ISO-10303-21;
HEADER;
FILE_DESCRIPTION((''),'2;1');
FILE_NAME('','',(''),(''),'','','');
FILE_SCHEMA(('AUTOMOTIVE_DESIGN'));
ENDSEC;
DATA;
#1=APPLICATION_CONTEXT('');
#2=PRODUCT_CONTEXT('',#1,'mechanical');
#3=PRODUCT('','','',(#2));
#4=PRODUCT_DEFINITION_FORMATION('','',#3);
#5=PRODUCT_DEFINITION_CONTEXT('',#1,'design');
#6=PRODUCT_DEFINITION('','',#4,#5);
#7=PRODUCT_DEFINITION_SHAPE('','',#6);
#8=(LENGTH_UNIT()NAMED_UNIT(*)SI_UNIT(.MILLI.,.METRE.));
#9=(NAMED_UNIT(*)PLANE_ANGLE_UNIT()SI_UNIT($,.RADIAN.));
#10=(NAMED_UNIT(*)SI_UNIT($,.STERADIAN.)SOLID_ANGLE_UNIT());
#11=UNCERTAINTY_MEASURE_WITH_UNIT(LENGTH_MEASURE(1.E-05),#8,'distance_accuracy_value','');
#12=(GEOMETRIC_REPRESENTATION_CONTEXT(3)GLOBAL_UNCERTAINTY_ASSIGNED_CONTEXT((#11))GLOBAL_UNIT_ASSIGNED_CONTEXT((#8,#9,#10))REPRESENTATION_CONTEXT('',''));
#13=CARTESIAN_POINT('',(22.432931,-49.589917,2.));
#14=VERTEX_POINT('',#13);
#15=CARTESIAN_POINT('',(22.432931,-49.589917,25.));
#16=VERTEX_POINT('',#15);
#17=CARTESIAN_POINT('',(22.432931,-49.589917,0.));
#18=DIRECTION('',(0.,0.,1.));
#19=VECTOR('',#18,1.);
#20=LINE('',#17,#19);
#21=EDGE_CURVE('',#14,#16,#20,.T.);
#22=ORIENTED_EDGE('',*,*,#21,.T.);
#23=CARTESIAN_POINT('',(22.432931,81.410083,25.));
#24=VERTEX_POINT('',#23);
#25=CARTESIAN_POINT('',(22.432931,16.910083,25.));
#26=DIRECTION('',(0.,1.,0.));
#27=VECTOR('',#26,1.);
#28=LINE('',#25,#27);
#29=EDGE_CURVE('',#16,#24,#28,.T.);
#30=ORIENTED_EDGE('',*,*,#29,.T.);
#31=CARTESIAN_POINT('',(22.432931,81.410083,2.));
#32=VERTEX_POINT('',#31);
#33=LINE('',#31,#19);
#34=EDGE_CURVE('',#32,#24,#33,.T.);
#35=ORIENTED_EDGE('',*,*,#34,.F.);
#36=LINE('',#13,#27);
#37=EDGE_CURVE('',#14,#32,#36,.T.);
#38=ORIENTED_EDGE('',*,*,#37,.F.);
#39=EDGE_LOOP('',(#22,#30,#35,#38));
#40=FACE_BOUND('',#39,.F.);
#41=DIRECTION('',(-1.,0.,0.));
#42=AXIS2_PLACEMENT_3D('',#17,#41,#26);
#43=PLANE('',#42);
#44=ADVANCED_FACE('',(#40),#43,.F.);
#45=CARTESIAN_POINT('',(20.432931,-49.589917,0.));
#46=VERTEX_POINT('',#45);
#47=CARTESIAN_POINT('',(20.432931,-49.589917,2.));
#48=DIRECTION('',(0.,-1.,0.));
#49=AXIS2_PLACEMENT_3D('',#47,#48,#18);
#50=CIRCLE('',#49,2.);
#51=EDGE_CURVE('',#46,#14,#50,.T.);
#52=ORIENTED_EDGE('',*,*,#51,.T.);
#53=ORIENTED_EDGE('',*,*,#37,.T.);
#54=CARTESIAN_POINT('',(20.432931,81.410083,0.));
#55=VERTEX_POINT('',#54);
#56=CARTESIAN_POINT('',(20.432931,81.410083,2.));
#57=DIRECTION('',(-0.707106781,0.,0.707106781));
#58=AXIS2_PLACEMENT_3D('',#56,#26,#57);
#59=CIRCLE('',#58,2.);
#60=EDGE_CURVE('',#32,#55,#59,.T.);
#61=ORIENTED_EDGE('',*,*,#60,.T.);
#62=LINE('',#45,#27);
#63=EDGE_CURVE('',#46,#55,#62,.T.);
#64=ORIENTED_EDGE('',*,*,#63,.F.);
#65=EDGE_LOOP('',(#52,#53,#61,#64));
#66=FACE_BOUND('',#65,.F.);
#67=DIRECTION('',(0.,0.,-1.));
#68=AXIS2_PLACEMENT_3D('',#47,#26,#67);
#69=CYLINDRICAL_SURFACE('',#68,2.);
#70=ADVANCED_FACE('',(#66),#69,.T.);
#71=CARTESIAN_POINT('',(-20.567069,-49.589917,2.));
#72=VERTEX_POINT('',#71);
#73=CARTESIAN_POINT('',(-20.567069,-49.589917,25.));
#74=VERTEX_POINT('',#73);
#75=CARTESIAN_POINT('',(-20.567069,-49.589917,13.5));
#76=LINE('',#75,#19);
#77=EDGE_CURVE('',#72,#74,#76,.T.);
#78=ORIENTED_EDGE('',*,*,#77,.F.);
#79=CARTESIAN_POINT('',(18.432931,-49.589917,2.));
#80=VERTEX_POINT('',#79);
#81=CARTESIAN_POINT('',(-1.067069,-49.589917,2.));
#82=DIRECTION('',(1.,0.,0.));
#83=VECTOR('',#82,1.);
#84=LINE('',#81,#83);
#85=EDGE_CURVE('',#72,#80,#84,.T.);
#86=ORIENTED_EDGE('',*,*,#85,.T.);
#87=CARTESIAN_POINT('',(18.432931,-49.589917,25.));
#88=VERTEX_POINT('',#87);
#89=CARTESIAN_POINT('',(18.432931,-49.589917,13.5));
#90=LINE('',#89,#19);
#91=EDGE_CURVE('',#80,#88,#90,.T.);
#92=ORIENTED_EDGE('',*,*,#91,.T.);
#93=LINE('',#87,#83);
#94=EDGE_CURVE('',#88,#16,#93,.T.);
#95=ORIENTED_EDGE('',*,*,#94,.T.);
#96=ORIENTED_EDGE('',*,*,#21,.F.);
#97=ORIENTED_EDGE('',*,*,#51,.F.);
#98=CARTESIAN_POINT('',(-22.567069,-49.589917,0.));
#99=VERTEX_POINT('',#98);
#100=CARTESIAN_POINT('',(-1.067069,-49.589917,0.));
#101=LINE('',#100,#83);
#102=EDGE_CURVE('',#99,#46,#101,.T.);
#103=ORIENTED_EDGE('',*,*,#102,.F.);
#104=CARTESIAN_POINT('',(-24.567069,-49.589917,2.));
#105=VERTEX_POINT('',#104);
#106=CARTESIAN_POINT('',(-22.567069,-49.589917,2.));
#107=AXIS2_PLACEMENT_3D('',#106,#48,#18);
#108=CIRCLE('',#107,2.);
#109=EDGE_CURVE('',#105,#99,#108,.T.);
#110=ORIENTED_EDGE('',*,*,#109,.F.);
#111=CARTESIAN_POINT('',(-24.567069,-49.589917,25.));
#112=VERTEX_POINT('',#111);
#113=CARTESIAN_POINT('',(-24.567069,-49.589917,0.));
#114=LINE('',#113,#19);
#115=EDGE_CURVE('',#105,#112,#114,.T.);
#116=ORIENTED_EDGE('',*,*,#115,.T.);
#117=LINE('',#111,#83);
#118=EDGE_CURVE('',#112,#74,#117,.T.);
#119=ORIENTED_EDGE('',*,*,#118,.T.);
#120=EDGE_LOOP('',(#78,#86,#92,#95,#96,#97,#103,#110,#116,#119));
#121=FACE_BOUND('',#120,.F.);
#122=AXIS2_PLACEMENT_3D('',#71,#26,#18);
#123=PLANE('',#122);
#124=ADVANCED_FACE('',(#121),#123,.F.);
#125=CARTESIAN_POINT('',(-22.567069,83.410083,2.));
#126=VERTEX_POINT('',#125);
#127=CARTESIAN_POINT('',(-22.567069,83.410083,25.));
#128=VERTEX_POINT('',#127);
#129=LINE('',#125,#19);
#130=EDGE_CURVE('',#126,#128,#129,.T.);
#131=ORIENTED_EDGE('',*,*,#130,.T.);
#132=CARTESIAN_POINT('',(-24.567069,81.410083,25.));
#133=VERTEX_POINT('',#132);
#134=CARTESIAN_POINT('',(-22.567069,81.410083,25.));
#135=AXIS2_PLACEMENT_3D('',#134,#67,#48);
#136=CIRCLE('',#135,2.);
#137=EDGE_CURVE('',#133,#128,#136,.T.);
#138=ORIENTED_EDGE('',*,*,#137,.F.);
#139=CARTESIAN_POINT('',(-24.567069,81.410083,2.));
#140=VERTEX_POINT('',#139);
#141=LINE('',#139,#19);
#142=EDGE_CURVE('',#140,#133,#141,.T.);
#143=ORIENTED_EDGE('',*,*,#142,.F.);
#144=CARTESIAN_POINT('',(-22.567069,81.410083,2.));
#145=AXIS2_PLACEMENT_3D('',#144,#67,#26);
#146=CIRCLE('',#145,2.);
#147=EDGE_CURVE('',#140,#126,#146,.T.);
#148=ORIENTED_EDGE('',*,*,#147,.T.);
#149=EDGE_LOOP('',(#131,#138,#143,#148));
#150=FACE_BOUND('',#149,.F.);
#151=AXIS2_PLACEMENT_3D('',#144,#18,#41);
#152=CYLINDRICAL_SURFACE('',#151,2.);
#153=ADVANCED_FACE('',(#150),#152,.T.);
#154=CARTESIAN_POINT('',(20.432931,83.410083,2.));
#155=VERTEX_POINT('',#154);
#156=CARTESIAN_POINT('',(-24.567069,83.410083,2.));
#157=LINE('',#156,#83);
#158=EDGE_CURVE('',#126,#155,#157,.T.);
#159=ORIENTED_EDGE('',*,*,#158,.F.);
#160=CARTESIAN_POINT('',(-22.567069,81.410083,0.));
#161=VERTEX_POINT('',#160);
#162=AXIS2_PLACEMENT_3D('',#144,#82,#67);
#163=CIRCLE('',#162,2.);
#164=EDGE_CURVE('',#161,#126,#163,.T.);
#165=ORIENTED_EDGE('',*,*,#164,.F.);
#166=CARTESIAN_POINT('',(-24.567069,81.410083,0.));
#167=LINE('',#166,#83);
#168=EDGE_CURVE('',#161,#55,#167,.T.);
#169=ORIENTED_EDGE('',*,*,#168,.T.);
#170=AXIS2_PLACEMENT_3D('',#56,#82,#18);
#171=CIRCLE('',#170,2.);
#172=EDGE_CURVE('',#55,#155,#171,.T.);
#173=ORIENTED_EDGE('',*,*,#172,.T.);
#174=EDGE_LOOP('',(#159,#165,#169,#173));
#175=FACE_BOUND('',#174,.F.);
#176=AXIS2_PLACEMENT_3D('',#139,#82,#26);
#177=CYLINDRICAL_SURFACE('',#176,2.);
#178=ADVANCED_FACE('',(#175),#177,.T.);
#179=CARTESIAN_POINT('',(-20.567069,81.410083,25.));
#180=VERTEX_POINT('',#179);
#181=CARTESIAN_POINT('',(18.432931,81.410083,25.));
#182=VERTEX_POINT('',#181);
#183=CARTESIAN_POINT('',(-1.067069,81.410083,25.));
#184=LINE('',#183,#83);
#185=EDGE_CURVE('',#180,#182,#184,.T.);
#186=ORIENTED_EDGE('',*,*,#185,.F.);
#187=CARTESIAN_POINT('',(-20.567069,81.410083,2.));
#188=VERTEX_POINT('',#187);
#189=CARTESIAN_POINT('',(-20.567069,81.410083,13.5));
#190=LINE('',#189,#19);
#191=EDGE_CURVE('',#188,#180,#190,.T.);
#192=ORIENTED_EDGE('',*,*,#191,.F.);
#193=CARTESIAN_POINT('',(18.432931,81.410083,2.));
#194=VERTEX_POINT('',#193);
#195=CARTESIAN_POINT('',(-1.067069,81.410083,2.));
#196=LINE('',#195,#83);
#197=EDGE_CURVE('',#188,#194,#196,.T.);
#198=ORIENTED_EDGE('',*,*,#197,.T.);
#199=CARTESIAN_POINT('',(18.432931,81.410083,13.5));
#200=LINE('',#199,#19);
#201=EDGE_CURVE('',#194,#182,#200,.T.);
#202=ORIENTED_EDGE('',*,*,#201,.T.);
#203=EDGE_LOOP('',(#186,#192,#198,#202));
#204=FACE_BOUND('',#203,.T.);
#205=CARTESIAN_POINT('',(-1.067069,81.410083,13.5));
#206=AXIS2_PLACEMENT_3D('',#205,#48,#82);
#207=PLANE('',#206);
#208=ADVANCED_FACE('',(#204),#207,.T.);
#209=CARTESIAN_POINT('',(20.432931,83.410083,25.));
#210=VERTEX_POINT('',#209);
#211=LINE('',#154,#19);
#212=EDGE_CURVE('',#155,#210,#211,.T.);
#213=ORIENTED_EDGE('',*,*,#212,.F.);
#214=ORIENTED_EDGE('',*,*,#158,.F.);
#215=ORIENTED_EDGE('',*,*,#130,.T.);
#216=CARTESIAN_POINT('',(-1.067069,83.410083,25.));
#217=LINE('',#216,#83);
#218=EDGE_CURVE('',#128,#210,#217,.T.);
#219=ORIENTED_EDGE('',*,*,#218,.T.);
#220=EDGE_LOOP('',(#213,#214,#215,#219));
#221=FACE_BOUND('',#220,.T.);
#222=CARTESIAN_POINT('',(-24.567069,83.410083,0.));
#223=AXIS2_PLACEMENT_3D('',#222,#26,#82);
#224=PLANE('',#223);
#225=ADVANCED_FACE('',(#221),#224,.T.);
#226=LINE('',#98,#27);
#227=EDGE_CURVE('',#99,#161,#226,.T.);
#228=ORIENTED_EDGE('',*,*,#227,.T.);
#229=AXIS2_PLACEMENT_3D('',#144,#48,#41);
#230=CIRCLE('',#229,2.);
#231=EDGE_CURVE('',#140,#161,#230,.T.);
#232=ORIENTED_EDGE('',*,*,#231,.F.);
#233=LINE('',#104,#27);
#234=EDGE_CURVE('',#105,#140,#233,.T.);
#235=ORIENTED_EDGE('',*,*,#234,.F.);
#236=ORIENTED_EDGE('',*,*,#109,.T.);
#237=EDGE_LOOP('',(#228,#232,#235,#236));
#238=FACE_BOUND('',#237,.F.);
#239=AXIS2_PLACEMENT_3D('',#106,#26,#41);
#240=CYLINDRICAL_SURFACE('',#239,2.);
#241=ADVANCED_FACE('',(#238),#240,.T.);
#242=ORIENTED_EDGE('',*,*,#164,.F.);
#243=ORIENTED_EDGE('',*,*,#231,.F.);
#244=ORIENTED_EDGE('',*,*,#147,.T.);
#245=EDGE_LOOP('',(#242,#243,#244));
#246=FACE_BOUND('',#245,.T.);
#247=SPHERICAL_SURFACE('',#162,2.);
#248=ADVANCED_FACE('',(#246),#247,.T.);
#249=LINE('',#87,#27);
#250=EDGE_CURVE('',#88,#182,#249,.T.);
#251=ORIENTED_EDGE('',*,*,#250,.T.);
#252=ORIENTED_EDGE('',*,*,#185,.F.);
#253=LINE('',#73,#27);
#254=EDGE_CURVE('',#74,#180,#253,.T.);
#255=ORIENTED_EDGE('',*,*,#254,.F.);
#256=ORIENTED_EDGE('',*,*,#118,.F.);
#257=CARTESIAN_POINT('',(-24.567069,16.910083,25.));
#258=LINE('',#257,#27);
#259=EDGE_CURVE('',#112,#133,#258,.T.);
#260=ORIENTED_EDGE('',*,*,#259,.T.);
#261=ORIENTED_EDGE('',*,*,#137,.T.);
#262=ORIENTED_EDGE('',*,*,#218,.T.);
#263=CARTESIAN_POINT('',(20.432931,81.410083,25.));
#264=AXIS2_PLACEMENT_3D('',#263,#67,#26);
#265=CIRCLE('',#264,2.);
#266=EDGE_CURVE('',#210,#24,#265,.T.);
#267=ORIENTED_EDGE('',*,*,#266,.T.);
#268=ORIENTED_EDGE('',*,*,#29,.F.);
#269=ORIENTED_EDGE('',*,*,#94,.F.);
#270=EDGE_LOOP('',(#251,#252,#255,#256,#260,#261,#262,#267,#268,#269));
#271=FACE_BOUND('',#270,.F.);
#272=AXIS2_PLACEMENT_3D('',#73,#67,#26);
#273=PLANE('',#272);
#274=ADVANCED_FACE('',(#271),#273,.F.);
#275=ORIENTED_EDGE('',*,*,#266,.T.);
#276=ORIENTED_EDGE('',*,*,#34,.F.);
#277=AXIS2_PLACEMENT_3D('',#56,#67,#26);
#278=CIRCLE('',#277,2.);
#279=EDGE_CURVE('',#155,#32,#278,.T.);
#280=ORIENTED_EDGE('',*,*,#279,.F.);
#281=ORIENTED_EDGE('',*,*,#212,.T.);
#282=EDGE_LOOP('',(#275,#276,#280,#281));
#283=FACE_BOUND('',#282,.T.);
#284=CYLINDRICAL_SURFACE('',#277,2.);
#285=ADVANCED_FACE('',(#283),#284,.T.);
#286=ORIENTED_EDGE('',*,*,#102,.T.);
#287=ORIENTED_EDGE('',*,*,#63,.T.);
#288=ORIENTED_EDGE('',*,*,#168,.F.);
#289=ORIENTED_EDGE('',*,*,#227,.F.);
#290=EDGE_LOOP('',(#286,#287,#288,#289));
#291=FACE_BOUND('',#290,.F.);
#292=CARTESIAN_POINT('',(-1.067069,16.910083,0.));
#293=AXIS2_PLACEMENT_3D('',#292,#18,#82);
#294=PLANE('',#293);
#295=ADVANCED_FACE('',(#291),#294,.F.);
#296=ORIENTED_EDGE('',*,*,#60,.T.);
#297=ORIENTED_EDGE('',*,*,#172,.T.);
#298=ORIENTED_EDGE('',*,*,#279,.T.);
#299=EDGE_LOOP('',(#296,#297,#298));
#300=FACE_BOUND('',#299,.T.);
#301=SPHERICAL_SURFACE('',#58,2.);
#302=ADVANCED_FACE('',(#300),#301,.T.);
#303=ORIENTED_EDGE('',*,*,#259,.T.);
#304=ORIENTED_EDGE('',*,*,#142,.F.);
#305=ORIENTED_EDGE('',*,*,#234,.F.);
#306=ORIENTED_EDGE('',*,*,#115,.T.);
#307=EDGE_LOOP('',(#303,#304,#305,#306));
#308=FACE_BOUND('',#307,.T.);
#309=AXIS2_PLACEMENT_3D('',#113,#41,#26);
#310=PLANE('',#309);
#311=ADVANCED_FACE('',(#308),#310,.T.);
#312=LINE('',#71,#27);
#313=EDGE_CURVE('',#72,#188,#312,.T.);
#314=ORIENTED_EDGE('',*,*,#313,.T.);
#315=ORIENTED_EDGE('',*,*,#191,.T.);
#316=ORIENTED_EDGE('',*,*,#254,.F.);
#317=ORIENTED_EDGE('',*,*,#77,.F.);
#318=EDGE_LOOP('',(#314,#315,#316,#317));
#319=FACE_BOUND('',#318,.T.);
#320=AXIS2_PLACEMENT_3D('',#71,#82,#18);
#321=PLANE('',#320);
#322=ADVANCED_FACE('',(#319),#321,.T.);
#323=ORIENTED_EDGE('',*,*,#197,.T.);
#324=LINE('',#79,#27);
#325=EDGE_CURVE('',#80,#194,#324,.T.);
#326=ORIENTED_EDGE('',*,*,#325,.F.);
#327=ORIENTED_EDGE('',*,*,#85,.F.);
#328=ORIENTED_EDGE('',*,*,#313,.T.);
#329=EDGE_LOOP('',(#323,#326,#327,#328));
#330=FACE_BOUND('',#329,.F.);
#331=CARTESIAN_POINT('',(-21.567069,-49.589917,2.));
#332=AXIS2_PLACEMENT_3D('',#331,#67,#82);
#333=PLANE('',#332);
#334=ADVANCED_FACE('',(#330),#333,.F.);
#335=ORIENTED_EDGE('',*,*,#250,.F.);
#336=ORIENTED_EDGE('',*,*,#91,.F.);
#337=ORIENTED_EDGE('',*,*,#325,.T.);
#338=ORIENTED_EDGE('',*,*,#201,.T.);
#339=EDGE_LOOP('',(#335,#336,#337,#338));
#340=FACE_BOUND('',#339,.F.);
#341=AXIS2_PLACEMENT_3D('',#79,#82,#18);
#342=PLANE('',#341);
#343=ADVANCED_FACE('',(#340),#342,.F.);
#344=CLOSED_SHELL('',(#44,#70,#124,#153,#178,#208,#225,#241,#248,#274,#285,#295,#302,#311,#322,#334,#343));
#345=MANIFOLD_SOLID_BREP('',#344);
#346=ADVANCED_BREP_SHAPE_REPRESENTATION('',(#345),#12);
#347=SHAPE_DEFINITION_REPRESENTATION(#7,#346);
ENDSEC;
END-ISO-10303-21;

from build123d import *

# Parameters (mm, degrees)
F0_W        = 47
F0_H        = 133
F1_DEPTH    = 25
F2_W        = 41
F2_H        = 23
F3_DEPTH    = 131
F4_R        = 2
F5_R        = 2
F6_T1_DEPTH = 28
F6_S5_W     = 2
F6_S5_H     = 2
F6_T6_DEPTH = 2
F7_DEPTH    = 1
F8_DEPTH    = 1
F9_DEPTH    = 0.5


# Not quite as in the source:
# - a fillet or chamfer that OpenCascade refuses, or shapes differently, is made with other operations: its cross-section is extruded or revolved along the edge and cut away or added


with BuildPart() as f1:
    # F0 (on Top) → F1 (new body)
    with BuildSketch(Plane.XY):
        with Locations((-1.0670694858, 16.9100829363)):
            Rectangle(F0_W, F0_H)
    extrude(amount=F1_DEPTH)

    # F2 (on face) → F3 (cut, through all)
    with BuildSketch(Plane.XZ.offset(49.5899170637)):
        with Locations((-1.0670694858, 13.5)):
            Rectangle(F2_W, F2_H)
    extrude(amount=-F3_DEPTH, mode=Mode.SUBTRACT)

    # F4
    f4_edges = [f1.edges().sort_by_distance(p)[0] for p in [
        (22.432931, 16.910083, 0),
        (-1.067069, 83.410083, 0),
    ]]
    fillet(f4_edges, radius=F4_R)

    # F5
    f5_edges = [f1.edges().sort_by_distance(p)[0] for p in [
        (-24.567069, 15.910083, 0),
    ]]
    fillet(f5_edges, radius=F5_R)

    # F6: fillet of radius 2 on 1 edges, made by hand

    # F6_s2 → F6_t1 (cut)
    with BuildSketch(Plane.XY.offset(2)):
        with BuildLine():
            ThreePointArc((20.4329305142, 83.4100829363), (21.8471440766, 82.8242964987), (22.4329305142, 81.4100829363))
            Line((22.4329305142, 81.4100829363), (22.4329305142, 83.4100829363))
            Line((22.4329305142, 83.4100829363), (20.4329305142, 83.4100829363))
        make_face()
    extrude(amount=F6_T1_DEPTH, mode=Mode.SUBTRACT)


with BuildPart() as f6_tool4:
    # F6_s5 → F6_t6 (new body)
    with BuildSketch(Plane.XZ.offset(-81.4100829363)):
        with Locations((21.4329305142, 1)):
            Rectangle(F6_S5_W, F6_S5_H)
    extrude(amount=-F6_T6_DEPTH)

    # F6_s7 → F6_t8 (revolve, cut)
    with BuildSketch(Plane(origin=(20.4329305142, 81.4100829363, 2), x_dir=(-0.7071067812, 0, 0.7071067812), z_dir=(-0.7071067812, 0, -0.7071067812))):
        with BuildLine():
            ThreePointArc((0, -2), (2, 0), (0, 2))
            Line((0, 2), (0, -2))
        make_face()
    revolve(axis=Axis((20.4329305142, 81.4100829363, 2), (0, 1, 0)), mode=Mode.SUBTRACT)


with BuildPart() as f1_1:
    add(f1.part)

    # F6_t3: cut F6_tool4
    add(f6_tool4.part, mode=Mode.SUBTRACT)

    # F7 (add): a face of the model
    f7_faces = [f1_1.faces().sort_by_distance(p)[0] for p in [
        (-21.5670694858, 15.9100829363, 13.5),
    ]]
    extrude(f7_faces, amount=F7_DEPTH)

    # F8 (add): a face of the model
    f8_faces = [f1_1.faces().sort_by_distance(p)[0] for p in [
        (19.4329305142, 15.9100829363, 13.5),
    ]]
    extrude(f8_faces, amount=F8_DEPTH)

    # F9 (add): a face of the model
    f9_faces = [f1_1.faces().sort_by_distance(p)[0] for p in [
        (-20.5670694858, 15.9100829363, 13.5),
    ]]
    extrude(f9_faces, amount=-F9_DEPTH)


solid = f1_1.part
